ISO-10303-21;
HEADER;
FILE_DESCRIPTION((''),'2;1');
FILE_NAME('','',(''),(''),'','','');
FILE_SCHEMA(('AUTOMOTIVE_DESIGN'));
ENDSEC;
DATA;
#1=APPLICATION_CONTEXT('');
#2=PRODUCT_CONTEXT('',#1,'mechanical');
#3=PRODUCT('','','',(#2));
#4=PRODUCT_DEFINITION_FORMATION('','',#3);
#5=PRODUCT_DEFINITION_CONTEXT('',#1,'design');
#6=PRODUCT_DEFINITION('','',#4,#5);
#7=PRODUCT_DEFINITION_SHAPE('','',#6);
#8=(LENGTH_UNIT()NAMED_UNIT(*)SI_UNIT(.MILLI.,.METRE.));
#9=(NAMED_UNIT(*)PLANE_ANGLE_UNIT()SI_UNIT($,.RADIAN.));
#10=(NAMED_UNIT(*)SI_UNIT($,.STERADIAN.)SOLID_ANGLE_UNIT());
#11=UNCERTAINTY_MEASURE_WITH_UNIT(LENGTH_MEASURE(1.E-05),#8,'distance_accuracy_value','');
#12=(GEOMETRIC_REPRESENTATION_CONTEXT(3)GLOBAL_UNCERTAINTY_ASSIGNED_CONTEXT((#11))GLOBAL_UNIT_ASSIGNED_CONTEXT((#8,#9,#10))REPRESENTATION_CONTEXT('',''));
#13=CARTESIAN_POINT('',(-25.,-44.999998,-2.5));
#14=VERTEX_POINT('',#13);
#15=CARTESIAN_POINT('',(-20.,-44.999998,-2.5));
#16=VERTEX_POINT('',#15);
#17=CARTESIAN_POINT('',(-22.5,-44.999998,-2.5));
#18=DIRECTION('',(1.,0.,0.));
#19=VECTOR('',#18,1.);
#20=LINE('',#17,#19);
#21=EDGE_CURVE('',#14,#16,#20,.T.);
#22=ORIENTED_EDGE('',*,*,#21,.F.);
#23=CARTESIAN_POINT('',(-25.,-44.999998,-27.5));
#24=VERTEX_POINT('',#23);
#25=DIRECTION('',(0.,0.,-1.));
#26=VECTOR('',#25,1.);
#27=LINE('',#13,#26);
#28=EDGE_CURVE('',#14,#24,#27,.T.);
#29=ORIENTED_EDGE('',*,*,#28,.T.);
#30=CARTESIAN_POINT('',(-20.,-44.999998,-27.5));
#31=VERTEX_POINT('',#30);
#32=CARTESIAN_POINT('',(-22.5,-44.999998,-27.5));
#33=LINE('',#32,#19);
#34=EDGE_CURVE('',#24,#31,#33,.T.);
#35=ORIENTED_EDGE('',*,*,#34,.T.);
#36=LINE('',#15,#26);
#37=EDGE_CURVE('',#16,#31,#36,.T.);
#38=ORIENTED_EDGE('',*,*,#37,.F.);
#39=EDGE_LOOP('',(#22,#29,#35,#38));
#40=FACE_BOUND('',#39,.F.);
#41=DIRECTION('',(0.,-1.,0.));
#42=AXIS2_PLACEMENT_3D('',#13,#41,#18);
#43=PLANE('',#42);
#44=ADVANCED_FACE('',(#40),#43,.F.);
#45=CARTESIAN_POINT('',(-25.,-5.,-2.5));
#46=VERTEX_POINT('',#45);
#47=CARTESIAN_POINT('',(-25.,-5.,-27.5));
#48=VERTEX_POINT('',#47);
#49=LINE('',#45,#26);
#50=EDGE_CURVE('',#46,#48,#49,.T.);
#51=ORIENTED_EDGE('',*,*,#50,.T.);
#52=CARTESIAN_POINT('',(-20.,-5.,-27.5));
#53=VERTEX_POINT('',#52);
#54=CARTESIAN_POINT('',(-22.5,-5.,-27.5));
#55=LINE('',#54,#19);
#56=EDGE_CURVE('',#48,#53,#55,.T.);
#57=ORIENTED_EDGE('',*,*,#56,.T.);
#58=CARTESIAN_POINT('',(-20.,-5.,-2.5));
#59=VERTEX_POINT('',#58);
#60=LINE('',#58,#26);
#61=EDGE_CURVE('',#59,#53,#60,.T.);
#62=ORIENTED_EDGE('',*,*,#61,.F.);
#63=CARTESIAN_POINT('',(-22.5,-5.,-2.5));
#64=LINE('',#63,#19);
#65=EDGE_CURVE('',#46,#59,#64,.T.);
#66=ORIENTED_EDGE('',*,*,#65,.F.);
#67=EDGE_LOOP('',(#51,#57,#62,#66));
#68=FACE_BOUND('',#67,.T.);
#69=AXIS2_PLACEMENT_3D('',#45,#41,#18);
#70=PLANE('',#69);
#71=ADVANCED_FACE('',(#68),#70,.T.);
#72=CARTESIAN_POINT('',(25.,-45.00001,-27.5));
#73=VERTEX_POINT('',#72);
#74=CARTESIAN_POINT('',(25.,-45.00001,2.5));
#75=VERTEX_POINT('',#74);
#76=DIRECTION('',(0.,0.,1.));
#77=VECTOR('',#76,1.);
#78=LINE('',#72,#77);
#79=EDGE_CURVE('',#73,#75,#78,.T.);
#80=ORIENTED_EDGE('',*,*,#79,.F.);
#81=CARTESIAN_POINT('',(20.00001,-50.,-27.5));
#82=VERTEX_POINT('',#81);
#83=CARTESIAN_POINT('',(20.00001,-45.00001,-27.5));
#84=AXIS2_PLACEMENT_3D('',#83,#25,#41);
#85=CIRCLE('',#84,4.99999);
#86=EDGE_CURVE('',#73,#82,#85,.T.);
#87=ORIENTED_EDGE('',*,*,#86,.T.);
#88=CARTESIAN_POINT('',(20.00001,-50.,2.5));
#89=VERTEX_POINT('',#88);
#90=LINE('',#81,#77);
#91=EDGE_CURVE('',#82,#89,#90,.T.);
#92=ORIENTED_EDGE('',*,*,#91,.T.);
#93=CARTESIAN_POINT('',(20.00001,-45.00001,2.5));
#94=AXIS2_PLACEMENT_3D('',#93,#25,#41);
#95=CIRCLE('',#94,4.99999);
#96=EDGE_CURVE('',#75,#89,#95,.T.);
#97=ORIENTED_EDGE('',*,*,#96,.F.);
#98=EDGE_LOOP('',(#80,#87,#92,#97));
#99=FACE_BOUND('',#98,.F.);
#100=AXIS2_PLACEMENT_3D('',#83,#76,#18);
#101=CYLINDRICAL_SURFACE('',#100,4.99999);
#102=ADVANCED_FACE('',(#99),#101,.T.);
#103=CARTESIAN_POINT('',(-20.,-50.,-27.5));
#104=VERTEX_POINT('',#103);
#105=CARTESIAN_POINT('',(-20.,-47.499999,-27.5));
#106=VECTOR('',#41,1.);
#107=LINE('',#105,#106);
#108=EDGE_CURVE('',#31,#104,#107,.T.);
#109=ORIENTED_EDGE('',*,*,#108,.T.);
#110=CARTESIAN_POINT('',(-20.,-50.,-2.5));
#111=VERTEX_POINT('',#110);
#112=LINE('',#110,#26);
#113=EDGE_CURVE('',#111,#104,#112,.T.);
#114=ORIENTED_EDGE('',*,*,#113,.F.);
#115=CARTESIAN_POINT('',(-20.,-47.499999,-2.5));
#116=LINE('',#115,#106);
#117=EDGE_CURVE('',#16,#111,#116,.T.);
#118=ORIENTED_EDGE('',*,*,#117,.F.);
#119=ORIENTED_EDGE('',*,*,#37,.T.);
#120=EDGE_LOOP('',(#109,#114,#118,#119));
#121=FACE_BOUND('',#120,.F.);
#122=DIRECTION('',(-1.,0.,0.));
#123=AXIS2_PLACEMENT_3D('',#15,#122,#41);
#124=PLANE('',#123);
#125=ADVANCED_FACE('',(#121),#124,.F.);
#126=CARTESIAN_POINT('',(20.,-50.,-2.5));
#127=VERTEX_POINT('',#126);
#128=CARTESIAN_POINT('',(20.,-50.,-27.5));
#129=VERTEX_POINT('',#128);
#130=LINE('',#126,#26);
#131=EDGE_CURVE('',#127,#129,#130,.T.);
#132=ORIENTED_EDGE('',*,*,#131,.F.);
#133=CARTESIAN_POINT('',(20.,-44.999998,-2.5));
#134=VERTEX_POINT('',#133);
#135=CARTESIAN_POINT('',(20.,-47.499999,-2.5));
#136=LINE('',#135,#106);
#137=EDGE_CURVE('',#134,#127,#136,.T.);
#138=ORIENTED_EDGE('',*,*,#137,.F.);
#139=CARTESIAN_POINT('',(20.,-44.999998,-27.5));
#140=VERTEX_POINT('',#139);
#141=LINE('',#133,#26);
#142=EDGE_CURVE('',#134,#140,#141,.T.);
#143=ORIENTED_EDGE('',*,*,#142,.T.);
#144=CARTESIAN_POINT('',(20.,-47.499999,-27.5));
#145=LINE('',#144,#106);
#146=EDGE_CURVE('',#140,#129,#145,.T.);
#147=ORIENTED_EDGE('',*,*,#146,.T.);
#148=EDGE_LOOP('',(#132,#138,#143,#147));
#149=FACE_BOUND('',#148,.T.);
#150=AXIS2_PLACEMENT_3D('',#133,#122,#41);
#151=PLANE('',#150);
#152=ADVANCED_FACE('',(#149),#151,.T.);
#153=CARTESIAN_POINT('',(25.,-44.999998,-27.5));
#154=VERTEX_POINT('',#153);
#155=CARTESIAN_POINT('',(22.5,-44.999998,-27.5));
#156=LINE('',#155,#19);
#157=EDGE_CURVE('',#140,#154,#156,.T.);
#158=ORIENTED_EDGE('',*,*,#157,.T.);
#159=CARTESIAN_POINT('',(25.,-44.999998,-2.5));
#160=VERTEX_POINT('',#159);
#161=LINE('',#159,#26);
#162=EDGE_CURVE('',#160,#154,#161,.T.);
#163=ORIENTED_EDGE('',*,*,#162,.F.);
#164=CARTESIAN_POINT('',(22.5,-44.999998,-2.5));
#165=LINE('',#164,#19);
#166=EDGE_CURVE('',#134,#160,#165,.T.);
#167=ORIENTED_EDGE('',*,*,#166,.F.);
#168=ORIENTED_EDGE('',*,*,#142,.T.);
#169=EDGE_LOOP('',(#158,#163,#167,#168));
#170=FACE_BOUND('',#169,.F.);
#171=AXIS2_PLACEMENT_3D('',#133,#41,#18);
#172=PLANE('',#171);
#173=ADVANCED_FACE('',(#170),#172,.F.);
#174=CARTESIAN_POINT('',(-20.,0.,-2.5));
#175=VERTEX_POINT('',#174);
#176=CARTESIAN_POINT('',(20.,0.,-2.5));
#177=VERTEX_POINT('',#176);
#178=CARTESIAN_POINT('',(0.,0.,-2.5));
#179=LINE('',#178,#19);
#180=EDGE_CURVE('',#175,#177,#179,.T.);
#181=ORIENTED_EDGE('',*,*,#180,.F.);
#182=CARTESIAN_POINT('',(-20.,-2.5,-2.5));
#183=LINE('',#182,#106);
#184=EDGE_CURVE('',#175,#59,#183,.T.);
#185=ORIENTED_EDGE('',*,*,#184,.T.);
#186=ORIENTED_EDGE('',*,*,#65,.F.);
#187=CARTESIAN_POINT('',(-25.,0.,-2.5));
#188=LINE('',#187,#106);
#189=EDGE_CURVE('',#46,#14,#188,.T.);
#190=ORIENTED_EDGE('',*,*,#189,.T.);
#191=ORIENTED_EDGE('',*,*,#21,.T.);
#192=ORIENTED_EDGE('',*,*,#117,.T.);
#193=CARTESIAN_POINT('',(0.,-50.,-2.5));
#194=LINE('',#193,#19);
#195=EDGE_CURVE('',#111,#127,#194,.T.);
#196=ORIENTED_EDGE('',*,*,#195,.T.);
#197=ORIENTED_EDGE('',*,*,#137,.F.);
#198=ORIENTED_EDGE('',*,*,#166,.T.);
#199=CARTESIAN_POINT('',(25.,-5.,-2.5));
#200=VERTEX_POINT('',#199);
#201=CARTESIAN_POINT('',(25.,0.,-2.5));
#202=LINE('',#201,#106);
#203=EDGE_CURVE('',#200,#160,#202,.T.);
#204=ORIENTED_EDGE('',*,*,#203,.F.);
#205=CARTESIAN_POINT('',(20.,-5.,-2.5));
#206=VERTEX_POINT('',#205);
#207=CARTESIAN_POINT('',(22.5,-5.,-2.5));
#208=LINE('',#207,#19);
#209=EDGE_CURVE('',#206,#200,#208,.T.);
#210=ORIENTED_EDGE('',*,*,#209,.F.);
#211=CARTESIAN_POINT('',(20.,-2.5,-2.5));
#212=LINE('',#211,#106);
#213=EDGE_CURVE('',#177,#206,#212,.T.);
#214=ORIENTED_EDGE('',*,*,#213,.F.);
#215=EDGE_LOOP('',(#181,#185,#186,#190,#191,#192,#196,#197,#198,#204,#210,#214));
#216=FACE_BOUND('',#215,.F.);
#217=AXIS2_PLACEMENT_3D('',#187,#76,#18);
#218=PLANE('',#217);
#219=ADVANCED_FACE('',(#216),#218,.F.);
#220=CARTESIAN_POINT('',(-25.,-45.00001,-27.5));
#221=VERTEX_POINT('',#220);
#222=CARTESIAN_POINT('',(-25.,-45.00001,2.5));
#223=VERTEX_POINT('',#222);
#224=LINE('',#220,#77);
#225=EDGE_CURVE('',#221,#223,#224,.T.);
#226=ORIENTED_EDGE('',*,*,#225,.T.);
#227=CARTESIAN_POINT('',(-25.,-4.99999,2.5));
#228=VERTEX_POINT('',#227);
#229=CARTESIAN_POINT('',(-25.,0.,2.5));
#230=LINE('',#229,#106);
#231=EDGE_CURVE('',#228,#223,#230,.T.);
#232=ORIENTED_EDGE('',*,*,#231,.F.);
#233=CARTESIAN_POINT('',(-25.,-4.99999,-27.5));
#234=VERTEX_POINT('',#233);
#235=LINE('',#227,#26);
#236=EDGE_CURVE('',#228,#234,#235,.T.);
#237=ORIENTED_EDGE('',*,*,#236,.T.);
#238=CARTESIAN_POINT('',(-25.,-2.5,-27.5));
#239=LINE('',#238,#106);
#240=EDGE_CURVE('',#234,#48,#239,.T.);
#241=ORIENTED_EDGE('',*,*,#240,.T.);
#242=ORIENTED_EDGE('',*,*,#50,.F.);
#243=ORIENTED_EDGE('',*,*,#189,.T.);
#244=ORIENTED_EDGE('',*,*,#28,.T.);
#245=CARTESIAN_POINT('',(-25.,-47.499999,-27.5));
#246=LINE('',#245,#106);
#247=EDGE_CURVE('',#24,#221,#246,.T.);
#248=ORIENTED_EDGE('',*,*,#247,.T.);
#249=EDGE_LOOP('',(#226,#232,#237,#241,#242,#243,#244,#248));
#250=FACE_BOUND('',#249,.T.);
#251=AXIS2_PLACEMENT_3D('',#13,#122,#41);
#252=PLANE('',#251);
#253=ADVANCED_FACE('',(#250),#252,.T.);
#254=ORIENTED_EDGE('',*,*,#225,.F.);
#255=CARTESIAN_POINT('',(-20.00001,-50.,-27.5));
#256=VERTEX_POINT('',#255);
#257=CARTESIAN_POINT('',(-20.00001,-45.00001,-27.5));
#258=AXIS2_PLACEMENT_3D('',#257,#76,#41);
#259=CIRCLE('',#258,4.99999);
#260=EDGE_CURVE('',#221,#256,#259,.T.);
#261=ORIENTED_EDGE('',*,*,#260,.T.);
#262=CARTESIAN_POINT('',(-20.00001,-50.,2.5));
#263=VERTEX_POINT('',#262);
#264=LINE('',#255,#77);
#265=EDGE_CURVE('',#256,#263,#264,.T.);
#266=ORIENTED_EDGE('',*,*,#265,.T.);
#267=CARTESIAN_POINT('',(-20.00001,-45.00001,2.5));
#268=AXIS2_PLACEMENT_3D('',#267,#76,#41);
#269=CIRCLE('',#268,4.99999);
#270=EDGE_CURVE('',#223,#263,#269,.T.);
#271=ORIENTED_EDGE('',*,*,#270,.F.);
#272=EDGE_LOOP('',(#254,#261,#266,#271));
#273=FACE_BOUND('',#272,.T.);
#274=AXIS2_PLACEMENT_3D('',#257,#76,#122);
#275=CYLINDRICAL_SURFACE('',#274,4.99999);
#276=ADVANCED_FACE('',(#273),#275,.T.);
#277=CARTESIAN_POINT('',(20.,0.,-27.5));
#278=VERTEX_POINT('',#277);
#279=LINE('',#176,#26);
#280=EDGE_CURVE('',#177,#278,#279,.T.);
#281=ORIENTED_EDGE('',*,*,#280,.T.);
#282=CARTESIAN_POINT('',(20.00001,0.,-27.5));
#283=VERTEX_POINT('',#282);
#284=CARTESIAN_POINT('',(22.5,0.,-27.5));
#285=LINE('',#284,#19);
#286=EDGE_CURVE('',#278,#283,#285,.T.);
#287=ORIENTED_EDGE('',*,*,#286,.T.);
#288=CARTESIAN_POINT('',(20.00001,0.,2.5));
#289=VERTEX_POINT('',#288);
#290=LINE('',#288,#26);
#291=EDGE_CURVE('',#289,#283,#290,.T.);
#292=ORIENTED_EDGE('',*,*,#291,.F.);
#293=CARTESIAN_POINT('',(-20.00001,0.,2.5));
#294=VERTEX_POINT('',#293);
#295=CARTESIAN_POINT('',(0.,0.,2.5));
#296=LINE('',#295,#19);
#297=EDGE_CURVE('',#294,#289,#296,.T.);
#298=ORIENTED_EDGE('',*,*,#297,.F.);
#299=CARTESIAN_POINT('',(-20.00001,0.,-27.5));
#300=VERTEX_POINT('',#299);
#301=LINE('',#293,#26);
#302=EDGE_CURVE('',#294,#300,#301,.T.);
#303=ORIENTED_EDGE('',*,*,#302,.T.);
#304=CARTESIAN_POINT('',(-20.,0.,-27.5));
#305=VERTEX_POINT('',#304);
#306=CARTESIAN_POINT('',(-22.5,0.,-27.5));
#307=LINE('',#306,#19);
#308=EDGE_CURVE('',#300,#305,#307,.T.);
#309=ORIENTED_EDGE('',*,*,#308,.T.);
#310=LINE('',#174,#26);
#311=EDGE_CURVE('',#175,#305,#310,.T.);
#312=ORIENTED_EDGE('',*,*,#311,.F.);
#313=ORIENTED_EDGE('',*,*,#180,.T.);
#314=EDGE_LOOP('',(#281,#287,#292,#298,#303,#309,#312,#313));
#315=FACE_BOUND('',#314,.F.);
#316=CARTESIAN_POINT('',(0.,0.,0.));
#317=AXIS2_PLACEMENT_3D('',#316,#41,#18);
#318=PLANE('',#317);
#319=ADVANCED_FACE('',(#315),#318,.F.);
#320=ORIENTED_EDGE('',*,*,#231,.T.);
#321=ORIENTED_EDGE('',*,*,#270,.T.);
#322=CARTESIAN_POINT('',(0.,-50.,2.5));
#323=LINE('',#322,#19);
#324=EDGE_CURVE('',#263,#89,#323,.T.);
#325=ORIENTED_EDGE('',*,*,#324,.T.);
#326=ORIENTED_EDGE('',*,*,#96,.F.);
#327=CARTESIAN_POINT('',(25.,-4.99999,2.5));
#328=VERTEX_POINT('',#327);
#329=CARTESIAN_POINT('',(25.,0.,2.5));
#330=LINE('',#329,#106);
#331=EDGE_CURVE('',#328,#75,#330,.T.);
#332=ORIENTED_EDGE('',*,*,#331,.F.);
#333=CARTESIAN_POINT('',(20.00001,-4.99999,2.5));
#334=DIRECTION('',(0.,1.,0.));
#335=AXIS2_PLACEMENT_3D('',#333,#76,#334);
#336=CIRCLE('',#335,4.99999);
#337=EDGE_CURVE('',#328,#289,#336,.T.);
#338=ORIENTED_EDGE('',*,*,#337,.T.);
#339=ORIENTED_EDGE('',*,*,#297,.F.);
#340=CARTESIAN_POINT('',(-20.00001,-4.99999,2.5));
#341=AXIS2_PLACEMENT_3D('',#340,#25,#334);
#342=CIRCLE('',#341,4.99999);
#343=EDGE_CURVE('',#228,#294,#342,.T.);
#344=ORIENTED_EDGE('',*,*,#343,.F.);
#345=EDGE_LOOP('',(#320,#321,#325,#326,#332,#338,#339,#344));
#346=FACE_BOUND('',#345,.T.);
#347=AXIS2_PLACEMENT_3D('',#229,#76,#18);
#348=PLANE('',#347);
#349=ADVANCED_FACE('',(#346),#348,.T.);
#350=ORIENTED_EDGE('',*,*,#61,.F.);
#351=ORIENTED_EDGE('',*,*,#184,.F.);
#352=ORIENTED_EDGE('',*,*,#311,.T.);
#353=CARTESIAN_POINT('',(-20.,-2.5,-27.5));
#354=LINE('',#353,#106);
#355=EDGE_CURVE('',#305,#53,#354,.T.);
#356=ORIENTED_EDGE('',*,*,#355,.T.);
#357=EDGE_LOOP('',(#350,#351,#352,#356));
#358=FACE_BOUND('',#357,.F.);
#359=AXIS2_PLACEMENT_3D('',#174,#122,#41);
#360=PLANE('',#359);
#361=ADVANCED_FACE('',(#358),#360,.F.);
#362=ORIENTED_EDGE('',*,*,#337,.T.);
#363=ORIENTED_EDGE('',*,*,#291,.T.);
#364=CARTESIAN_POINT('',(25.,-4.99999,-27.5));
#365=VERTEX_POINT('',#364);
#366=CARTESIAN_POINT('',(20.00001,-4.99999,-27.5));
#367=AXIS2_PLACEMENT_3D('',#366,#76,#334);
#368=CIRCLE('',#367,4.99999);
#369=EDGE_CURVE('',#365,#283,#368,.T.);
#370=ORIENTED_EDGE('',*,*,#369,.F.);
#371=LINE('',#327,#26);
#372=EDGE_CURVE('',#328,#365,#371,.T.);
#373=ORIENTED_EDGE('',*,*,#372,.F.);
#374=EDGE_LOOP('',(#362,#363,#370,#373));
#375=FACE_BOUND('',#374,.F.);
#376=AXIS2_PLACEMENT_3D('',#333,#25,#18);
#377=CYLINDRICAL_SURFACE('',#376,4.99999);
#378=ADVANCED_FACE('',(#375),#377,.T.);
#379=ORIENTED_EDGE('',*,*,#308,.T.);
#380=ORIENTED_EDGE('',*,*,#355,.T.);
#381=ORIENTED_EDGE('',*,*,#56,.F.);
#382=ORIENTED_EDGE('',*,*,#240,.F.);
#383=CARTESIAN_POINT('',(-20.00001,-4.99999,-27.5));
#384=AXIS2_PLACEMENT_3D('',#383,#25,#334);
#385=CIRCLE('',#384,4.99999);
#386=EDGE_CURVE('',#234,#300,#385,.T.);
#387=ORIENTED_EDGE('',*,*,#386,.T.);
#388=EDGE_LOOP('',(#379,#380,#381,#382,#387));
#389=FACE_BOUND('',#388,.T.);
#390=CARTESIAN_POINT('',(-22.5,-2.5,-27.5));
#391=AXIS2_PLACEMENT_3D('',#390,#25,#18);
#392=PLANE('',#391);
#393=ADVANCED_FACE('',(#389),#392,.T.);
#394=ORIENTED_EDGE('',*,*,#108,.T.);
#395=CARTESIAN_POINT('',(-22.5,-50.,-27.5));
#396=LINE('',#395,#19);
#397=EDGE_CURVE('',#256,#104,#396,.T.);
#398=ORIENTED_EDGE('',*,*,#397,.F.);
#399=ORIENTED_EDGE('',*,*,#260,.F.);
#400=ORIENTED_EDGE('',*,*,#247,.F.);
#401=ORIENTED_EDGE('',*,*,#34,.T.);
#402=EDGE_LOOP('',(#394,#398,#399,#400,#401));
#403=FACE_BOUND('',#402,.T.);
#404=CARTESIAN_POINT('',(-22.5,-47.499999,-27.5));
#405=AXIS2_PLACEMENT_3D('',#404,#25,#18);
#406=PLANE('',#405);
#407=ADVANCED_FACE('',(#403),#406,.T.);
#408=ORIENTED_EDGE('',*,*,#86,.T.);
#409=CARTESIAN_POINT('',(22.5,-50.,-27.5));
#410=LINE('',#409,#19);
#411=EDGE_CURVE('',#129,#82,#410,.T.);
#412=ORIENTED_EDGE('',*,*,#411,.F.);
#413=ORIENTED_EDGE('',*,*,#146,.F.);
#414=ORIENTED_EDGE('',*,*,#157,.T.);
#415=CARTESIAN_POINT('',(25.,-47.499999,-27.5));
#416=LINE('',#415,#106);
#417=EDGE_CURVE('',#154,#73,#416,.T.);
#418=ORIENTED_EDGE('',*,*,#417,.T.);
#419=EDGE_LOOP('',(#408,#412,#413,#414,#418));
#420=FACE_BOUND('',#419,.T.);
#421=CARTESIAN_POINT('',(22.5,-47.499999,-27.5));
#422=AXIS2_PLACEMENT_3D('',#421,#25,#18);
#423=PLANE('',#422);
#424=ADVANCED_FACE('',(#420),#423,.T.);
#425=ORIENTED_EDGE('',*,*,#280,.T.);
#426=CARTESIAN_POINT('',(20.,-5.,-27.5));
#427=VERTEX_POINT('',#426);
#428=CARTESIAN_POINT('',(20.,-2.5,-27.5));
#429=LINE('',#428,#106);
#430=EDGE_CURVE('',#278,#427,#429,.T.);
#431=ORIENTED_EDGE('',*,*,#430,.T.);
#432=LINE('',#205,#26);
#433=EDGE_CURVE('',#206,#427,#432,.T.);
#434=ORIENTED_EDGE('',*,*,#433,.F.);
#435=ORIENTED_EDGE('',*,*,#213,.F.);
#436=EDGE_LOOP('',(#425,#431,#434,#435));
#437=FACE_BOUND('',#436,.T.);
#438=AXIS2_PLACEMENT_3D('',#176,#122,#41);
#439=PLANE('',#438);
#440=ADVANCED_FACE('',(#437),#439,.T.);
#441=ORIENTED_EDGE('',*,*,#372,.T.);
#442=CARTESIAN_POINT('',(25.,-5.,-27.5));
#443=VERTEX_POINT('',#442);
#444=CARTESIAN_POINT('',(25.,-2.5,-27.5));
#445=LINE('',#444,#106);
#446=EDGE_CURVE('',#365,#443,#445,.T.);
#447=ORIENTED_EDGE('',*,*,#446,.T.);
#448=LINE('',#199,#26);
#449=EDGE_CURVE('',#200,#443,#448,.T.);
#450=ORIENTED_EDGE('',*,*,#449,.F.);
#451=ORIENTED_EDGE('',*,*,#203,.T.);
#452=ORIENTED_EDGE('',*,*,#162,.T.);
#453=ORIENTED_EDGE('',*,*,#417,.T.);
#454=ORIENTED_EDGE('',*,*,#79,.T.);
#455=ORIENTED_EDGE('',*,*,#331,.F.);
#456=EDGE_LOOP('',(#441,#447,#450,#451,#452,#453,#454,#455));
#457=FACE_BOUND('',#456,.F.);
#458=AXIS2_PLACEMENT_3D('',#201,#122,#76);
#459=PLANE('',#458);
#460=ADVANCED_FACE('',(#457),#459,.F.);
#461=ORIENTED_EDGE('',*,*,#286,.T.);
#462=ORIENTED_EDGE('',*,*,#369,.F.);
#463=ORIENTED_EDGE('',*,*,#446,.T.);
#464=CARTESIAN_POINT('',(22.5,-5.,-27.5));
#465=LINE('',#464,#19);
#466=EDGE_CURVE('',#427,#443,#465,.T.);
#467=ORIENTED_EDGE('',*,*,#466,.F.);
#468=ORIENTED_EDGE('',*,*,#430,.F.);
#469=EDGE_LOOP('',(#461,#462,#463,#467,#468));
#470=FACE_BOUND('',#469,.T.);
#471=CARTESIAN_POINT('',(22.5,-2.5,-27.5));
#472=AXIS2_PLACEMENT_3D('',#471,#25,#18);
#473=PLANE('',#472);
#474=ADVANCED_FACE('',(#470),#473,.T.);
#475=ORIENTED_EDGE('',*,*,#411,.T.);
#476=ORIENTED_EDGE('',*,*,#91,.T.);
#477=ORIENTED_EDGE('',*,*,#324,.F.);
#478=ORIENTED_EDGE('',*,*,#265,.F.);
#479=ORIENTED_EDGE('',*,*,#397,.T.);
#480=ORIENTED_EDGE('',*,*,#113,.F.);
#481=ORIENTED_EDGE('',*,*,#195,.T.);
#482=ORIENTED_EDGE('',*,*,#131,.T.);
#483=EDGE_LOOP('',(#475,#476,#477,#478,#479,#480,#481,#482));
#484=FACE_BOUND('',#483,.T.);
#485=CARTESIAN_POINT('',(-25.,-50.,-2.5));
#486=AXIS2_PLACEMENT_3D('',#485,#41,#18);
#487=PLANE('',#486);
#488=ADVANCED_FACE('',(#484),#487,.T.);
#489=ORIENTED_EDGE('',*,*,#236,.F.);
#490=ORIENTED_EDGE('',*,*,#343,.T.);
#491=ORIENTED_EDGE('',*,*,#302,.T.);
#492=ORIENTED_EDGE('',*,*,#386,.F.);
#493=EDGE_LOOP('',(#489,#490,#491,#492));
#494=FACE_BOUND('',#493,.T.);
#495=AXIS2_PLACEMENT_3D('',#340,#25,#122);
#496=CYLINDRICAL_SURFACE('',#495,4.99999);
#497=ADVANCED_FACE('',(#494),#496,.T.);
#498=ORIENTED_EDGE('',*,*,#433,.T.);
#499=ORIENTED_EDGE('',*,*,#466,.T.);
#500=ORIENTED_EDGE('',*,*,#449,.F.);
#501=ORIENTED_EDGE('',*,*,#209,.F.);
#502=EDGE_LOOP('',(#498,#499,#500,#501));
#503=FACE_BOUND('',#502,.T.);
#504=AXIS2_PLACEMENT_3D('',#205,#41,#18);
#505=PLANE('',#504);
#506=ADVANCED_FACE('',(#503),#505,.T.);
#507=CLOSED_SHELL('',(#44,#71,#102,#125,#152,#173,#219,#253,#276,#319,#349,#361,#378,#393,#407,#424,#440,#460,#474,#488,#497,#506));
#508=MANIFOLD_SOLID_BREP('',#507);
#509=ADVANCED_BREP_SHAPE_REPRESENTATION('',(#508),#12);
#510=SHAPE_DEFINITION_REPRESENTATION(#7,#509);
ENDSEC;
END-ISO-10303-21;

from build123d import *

# Parameters (mm, degrees)
F0_W     = 50
F0_H     = 5
F1_DEPTH = 50
F2_W     = 5
F2_H     = 5.0000017802
F2_H_2   = 5
F3_DEPTH = 25
F4_R     = 4.99999


# Not quite as in the source:
# - a fillet or chamfer is up to 0.001 mm smaller than in the source, because OpenCascade refuses the exact size


with BuildPart() as f1:
    # F0 (on Front) → F1 (new body)
    with BuildSketch(Plane.XZ):
        Rectangle(F0_W, F0_H)
    extrude(amount=F1_DEPTH)

    # F2 (on face) → F3 (join)
    with BuildSketch(Plane(origin=(0, 0, -2.5), x_dir=(1, 0, 0), z_dir=(0, 0, -1))):
        with Locations((-22.5, 47.4999991099)):
            Rectangle(F2_W, F2_H)
        with Locations((22.5, 47.4999991099)):
            Rectangle(F2_W, F2_H)
        with Locations((22.5, 2.5)):
            Rectangle(F2_W, F2_H_2)
        with Locations((-22.5, 2.5)):
            Rectangle(F2_W, F2_H_2)
    extrude(amount=F3_DEPTH)

    # F4 (radius 5 in the source; OpenCascade refuses exactly that, so slightly less here)
    f4_edges = [f1.edges().sort_by_distance(p)[0] for p in [
        (-25, -50, -12.5),
        (25, -50, -12.5),
        (25, 0, -12.5),
        (-25, 0, -12.5),
    ]]
    fillet(f4_edges, radius=F4_R)


solid = f1.part
